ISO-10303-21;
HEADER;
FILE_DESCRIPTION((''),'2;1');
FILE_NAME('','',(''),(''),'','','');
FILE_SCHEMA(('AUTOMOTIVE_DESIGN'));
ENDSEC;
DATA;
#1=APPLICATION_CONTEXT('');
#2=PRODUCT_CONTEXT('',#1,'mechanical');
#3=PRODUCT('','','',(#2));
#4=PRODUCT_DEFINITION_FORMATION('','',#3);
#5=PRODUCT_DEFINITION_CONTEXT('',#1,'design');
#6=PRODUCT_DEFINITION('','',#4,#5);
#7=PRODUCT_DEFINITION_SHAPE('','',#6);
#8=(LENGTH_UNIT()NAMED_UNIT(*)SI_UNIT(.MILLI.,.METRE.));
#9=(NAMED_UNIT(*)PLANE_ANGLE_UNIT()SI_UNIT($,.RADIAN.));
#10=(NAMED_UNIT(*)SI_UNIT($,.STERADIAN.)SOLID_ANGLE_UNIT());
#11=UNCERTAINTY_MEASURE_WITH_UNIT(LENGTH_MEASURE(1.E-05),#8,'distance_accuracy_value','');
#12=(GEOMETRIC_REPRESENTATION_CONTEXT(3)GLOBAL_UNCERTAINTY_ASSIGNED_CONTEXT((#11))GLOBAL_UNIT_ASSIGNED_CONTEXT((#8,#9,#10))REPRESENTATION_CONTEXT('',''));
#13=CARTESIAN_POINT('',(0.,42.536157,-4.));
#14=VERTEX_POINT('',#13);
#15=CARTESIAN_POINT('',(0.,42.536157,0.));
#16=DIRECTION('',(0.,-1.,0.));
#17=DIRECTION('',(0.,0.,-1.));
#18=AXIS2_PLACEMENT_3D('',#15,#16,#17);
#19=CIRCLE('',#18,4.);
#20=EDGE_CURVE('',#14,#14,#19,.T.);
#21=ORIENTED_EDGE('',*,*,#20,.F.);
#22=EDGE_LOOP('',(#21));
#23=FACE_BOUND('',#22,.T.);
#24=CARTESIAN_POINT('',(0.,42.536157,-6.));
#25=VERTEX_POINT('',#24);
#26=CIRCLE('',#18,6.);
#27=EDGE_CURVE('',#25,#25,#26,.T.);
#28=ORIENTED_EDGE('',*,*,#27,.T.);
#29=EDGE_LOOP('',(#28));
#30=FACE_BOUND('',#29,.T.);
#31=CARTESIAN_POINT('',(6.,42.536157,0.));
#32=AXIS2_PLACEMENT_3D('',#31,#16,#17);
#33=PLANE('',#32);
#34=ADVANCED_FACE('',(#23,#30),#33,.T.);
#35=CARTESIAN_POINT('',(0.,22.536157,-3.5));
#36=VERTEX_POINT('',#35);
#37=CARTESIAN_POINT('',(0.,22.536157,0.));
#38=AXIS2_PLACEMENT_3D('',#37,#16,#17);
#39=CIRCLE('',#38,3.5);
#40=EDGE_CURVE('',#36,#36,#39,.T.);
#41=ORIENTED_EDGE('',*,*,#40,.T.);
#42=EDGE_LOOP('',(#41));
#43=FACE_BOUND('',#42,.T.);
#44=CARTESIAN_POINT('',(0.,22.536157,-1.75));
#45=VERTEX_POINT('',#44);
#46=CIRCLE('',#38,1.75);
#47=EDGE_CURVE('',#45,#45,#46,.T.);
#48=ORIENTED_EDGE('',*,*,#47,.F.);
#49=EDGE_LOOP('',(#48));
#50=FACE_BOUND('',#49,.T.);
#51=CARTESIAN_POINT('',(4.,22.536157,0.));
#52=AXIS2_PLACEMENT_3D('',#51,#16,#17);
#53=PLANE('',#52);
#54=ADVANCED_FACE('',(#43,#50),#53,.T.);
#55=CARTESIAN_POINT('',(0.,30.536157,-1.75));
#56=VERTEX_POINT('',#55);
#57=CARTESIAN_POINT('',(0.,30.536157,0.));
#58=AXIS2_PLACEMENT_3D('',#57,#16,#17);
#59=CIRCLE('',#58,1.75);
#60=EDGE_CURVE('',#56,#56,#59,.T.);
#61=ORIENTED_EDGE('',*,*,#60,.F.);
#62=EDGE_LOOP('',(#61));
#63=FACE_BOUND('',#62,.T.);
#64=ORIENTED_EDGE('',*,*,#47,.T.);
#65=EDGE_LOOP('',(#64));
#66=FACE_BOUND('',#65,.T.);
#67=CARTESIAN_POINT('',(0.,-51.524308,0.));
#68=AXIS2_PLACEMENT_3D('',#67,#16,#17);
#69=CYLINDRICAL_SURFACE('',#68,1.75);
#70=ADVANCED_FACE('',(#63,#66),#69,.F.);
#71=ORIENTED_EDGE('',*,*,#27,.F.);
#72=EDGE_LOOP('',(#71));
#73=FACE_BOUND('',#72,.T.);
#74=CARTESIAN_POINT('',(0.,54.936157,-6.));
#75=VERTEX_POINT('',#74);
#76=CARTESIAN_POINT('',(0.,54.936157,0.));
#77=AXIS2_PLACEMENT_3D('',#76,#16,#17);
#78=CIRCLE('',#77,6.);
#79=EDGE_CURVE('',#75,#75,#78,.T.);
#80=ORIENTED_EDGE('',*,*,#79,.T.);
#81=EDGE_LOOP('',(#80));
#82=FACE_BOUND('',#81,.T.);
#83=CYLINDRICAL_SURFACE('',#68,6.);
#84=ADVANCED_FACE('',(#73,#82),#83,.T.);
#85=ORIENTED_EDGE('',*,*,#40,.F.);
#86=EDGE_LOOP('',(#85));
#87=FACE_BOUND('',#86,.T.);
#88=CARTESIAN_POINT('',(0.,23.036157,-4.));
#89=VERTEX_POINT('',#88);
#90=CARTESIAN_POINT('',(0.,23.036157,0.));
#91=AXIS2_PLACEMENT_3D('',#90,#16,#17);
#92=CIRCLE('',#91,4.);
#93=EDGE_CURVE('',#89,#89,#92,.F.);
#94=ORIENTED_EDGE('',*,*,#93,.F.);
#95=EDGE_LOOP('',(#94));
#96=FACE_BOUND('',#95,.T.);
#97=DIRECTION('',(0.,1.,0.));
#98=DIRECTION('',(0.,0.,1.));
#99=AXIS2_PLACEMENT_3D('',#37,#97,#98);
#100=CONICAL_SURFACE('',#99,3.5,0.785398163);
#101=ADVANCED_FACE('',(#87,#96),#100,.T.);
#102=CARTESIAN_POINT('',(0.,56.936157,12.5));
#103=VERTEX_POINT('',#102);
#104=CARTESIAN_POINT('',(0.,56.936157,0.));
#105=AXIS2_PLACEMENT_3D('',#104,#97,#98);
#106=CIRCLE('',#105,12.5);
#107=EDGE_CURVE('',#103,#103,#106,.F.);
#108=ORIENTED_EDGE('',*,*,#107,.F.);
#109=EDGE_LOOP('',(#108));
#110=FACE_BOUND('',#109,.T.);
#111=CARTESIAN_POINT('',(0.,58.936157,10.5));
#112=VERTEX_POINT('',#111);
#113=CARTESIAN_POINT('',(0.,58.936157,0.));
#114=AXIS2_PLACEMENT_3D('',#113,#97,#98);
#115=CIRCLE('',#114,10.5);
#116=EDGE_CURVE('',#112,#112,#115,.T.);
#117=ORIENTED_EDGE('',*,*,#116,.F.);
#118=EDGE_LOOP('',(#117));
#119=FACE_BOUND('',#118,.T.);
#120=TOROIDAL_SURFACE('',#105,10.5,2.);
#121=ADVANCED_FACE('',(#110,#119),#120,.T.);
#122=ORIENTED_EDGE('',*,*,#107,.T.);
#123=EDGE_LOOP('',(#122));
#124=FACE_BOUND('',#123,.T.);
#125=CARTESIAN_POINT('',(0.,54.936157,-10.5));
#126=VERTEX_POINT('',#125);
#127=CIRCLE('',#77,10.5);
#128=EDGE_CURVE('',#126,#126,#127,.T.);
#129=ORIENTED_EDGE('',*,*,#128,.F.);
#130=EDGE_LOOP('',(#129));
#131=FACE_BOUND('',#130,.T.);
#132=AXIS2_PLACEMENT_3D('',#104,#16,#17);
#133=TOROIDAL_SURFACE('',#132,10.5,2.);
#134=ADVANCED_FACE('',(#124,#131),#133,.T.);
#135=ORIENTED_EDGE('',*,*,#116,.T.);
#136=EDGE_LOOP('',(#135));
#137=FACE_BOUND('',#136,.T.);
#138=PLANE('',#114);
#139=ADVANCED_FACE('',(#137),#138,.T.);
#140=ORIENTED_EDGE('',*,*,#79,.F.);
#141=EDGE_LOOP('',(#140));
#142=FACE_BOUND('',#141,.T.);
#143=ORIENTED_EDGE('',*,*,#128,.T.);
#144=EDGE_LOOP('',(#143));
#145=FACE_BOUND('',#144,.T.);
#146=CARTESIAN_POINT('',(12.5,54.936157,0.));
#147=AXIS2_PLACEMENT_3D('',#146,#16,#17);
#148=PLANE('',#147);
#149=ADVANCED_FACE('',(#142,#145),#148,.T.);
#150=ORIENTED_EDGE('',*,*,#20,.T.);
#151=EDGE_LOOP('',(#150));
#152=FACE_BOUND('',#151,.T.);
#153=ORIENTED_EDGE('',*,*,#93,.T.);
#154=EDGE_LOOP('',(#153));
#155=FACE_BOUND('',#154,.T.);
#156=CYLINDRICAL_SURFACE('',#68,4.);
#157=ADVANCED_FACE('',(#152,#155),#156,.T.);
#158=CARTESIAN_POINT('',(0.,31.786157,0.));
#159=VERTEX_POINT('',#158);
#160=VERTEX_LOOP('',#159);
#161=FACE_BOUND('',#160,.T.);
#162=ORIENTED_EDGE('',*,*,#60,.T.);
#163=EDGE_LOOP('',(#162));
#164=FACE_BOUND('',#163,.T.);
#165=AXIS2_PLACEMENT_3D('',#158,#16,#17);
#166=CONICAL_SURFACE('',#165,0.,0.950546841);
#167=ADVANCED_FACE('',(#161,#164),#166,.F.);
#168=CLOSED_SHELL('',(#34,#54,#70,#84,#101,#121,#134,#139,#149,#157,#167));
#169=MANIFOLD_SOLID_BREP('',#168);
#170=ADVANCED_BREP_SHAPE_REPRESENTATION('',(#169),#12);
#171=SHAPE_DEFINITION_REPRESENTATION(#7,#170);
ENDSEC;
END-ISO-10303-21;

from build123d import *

# Parameters (mm, degrees)
FILETE1_R     = 2
CHANFRO1_SIZE = 0.5


with BuildPart() as part:
    # Esboço1 → Revolução1 (revolve)
    with BuildSketch(Plane.XY, mode=Mode.PRIVATE) as revolu_o1_sk:
        Polygon((0, 58.936157254), (12.5, 58.936157254), (12.5, 54.936157254), (6, 54.936157254), (6, 42.536157254), (4, 42.536157254), (4, 22.536157254), (1.75, 22.536157254), (1.75, 30.536157254), (0, 31.786157254), align=None)
    revolve(revolu_o1_sk.sketch.rotate(Axis((0, -51.524307863, 0), (0, 1, 0)), 90), axis=Axis((0, -51.524307863, 0), (0, 1, 0)))

    # Filete1
    filete1_edges = [part.edges().sort_by_distance(p)[0] for p in [
        (0, 54.936157254, 12.5),
        (0, 58.936157254, 12.5),
    ]]
    fillet(filete1_edges, radius=FILETE1_R - 0.0001)  # a hair under: the kernel refuses the full size

    # Chanfro1
    chanfro1_edges = [part.edges().sort_by_distance(p)[0] for p in [
        (0, 22.536157254, 4),
    ]]
    chamfer(chanfro1_edges, length=CHANFRO1_SIZE)


solid = part.part
